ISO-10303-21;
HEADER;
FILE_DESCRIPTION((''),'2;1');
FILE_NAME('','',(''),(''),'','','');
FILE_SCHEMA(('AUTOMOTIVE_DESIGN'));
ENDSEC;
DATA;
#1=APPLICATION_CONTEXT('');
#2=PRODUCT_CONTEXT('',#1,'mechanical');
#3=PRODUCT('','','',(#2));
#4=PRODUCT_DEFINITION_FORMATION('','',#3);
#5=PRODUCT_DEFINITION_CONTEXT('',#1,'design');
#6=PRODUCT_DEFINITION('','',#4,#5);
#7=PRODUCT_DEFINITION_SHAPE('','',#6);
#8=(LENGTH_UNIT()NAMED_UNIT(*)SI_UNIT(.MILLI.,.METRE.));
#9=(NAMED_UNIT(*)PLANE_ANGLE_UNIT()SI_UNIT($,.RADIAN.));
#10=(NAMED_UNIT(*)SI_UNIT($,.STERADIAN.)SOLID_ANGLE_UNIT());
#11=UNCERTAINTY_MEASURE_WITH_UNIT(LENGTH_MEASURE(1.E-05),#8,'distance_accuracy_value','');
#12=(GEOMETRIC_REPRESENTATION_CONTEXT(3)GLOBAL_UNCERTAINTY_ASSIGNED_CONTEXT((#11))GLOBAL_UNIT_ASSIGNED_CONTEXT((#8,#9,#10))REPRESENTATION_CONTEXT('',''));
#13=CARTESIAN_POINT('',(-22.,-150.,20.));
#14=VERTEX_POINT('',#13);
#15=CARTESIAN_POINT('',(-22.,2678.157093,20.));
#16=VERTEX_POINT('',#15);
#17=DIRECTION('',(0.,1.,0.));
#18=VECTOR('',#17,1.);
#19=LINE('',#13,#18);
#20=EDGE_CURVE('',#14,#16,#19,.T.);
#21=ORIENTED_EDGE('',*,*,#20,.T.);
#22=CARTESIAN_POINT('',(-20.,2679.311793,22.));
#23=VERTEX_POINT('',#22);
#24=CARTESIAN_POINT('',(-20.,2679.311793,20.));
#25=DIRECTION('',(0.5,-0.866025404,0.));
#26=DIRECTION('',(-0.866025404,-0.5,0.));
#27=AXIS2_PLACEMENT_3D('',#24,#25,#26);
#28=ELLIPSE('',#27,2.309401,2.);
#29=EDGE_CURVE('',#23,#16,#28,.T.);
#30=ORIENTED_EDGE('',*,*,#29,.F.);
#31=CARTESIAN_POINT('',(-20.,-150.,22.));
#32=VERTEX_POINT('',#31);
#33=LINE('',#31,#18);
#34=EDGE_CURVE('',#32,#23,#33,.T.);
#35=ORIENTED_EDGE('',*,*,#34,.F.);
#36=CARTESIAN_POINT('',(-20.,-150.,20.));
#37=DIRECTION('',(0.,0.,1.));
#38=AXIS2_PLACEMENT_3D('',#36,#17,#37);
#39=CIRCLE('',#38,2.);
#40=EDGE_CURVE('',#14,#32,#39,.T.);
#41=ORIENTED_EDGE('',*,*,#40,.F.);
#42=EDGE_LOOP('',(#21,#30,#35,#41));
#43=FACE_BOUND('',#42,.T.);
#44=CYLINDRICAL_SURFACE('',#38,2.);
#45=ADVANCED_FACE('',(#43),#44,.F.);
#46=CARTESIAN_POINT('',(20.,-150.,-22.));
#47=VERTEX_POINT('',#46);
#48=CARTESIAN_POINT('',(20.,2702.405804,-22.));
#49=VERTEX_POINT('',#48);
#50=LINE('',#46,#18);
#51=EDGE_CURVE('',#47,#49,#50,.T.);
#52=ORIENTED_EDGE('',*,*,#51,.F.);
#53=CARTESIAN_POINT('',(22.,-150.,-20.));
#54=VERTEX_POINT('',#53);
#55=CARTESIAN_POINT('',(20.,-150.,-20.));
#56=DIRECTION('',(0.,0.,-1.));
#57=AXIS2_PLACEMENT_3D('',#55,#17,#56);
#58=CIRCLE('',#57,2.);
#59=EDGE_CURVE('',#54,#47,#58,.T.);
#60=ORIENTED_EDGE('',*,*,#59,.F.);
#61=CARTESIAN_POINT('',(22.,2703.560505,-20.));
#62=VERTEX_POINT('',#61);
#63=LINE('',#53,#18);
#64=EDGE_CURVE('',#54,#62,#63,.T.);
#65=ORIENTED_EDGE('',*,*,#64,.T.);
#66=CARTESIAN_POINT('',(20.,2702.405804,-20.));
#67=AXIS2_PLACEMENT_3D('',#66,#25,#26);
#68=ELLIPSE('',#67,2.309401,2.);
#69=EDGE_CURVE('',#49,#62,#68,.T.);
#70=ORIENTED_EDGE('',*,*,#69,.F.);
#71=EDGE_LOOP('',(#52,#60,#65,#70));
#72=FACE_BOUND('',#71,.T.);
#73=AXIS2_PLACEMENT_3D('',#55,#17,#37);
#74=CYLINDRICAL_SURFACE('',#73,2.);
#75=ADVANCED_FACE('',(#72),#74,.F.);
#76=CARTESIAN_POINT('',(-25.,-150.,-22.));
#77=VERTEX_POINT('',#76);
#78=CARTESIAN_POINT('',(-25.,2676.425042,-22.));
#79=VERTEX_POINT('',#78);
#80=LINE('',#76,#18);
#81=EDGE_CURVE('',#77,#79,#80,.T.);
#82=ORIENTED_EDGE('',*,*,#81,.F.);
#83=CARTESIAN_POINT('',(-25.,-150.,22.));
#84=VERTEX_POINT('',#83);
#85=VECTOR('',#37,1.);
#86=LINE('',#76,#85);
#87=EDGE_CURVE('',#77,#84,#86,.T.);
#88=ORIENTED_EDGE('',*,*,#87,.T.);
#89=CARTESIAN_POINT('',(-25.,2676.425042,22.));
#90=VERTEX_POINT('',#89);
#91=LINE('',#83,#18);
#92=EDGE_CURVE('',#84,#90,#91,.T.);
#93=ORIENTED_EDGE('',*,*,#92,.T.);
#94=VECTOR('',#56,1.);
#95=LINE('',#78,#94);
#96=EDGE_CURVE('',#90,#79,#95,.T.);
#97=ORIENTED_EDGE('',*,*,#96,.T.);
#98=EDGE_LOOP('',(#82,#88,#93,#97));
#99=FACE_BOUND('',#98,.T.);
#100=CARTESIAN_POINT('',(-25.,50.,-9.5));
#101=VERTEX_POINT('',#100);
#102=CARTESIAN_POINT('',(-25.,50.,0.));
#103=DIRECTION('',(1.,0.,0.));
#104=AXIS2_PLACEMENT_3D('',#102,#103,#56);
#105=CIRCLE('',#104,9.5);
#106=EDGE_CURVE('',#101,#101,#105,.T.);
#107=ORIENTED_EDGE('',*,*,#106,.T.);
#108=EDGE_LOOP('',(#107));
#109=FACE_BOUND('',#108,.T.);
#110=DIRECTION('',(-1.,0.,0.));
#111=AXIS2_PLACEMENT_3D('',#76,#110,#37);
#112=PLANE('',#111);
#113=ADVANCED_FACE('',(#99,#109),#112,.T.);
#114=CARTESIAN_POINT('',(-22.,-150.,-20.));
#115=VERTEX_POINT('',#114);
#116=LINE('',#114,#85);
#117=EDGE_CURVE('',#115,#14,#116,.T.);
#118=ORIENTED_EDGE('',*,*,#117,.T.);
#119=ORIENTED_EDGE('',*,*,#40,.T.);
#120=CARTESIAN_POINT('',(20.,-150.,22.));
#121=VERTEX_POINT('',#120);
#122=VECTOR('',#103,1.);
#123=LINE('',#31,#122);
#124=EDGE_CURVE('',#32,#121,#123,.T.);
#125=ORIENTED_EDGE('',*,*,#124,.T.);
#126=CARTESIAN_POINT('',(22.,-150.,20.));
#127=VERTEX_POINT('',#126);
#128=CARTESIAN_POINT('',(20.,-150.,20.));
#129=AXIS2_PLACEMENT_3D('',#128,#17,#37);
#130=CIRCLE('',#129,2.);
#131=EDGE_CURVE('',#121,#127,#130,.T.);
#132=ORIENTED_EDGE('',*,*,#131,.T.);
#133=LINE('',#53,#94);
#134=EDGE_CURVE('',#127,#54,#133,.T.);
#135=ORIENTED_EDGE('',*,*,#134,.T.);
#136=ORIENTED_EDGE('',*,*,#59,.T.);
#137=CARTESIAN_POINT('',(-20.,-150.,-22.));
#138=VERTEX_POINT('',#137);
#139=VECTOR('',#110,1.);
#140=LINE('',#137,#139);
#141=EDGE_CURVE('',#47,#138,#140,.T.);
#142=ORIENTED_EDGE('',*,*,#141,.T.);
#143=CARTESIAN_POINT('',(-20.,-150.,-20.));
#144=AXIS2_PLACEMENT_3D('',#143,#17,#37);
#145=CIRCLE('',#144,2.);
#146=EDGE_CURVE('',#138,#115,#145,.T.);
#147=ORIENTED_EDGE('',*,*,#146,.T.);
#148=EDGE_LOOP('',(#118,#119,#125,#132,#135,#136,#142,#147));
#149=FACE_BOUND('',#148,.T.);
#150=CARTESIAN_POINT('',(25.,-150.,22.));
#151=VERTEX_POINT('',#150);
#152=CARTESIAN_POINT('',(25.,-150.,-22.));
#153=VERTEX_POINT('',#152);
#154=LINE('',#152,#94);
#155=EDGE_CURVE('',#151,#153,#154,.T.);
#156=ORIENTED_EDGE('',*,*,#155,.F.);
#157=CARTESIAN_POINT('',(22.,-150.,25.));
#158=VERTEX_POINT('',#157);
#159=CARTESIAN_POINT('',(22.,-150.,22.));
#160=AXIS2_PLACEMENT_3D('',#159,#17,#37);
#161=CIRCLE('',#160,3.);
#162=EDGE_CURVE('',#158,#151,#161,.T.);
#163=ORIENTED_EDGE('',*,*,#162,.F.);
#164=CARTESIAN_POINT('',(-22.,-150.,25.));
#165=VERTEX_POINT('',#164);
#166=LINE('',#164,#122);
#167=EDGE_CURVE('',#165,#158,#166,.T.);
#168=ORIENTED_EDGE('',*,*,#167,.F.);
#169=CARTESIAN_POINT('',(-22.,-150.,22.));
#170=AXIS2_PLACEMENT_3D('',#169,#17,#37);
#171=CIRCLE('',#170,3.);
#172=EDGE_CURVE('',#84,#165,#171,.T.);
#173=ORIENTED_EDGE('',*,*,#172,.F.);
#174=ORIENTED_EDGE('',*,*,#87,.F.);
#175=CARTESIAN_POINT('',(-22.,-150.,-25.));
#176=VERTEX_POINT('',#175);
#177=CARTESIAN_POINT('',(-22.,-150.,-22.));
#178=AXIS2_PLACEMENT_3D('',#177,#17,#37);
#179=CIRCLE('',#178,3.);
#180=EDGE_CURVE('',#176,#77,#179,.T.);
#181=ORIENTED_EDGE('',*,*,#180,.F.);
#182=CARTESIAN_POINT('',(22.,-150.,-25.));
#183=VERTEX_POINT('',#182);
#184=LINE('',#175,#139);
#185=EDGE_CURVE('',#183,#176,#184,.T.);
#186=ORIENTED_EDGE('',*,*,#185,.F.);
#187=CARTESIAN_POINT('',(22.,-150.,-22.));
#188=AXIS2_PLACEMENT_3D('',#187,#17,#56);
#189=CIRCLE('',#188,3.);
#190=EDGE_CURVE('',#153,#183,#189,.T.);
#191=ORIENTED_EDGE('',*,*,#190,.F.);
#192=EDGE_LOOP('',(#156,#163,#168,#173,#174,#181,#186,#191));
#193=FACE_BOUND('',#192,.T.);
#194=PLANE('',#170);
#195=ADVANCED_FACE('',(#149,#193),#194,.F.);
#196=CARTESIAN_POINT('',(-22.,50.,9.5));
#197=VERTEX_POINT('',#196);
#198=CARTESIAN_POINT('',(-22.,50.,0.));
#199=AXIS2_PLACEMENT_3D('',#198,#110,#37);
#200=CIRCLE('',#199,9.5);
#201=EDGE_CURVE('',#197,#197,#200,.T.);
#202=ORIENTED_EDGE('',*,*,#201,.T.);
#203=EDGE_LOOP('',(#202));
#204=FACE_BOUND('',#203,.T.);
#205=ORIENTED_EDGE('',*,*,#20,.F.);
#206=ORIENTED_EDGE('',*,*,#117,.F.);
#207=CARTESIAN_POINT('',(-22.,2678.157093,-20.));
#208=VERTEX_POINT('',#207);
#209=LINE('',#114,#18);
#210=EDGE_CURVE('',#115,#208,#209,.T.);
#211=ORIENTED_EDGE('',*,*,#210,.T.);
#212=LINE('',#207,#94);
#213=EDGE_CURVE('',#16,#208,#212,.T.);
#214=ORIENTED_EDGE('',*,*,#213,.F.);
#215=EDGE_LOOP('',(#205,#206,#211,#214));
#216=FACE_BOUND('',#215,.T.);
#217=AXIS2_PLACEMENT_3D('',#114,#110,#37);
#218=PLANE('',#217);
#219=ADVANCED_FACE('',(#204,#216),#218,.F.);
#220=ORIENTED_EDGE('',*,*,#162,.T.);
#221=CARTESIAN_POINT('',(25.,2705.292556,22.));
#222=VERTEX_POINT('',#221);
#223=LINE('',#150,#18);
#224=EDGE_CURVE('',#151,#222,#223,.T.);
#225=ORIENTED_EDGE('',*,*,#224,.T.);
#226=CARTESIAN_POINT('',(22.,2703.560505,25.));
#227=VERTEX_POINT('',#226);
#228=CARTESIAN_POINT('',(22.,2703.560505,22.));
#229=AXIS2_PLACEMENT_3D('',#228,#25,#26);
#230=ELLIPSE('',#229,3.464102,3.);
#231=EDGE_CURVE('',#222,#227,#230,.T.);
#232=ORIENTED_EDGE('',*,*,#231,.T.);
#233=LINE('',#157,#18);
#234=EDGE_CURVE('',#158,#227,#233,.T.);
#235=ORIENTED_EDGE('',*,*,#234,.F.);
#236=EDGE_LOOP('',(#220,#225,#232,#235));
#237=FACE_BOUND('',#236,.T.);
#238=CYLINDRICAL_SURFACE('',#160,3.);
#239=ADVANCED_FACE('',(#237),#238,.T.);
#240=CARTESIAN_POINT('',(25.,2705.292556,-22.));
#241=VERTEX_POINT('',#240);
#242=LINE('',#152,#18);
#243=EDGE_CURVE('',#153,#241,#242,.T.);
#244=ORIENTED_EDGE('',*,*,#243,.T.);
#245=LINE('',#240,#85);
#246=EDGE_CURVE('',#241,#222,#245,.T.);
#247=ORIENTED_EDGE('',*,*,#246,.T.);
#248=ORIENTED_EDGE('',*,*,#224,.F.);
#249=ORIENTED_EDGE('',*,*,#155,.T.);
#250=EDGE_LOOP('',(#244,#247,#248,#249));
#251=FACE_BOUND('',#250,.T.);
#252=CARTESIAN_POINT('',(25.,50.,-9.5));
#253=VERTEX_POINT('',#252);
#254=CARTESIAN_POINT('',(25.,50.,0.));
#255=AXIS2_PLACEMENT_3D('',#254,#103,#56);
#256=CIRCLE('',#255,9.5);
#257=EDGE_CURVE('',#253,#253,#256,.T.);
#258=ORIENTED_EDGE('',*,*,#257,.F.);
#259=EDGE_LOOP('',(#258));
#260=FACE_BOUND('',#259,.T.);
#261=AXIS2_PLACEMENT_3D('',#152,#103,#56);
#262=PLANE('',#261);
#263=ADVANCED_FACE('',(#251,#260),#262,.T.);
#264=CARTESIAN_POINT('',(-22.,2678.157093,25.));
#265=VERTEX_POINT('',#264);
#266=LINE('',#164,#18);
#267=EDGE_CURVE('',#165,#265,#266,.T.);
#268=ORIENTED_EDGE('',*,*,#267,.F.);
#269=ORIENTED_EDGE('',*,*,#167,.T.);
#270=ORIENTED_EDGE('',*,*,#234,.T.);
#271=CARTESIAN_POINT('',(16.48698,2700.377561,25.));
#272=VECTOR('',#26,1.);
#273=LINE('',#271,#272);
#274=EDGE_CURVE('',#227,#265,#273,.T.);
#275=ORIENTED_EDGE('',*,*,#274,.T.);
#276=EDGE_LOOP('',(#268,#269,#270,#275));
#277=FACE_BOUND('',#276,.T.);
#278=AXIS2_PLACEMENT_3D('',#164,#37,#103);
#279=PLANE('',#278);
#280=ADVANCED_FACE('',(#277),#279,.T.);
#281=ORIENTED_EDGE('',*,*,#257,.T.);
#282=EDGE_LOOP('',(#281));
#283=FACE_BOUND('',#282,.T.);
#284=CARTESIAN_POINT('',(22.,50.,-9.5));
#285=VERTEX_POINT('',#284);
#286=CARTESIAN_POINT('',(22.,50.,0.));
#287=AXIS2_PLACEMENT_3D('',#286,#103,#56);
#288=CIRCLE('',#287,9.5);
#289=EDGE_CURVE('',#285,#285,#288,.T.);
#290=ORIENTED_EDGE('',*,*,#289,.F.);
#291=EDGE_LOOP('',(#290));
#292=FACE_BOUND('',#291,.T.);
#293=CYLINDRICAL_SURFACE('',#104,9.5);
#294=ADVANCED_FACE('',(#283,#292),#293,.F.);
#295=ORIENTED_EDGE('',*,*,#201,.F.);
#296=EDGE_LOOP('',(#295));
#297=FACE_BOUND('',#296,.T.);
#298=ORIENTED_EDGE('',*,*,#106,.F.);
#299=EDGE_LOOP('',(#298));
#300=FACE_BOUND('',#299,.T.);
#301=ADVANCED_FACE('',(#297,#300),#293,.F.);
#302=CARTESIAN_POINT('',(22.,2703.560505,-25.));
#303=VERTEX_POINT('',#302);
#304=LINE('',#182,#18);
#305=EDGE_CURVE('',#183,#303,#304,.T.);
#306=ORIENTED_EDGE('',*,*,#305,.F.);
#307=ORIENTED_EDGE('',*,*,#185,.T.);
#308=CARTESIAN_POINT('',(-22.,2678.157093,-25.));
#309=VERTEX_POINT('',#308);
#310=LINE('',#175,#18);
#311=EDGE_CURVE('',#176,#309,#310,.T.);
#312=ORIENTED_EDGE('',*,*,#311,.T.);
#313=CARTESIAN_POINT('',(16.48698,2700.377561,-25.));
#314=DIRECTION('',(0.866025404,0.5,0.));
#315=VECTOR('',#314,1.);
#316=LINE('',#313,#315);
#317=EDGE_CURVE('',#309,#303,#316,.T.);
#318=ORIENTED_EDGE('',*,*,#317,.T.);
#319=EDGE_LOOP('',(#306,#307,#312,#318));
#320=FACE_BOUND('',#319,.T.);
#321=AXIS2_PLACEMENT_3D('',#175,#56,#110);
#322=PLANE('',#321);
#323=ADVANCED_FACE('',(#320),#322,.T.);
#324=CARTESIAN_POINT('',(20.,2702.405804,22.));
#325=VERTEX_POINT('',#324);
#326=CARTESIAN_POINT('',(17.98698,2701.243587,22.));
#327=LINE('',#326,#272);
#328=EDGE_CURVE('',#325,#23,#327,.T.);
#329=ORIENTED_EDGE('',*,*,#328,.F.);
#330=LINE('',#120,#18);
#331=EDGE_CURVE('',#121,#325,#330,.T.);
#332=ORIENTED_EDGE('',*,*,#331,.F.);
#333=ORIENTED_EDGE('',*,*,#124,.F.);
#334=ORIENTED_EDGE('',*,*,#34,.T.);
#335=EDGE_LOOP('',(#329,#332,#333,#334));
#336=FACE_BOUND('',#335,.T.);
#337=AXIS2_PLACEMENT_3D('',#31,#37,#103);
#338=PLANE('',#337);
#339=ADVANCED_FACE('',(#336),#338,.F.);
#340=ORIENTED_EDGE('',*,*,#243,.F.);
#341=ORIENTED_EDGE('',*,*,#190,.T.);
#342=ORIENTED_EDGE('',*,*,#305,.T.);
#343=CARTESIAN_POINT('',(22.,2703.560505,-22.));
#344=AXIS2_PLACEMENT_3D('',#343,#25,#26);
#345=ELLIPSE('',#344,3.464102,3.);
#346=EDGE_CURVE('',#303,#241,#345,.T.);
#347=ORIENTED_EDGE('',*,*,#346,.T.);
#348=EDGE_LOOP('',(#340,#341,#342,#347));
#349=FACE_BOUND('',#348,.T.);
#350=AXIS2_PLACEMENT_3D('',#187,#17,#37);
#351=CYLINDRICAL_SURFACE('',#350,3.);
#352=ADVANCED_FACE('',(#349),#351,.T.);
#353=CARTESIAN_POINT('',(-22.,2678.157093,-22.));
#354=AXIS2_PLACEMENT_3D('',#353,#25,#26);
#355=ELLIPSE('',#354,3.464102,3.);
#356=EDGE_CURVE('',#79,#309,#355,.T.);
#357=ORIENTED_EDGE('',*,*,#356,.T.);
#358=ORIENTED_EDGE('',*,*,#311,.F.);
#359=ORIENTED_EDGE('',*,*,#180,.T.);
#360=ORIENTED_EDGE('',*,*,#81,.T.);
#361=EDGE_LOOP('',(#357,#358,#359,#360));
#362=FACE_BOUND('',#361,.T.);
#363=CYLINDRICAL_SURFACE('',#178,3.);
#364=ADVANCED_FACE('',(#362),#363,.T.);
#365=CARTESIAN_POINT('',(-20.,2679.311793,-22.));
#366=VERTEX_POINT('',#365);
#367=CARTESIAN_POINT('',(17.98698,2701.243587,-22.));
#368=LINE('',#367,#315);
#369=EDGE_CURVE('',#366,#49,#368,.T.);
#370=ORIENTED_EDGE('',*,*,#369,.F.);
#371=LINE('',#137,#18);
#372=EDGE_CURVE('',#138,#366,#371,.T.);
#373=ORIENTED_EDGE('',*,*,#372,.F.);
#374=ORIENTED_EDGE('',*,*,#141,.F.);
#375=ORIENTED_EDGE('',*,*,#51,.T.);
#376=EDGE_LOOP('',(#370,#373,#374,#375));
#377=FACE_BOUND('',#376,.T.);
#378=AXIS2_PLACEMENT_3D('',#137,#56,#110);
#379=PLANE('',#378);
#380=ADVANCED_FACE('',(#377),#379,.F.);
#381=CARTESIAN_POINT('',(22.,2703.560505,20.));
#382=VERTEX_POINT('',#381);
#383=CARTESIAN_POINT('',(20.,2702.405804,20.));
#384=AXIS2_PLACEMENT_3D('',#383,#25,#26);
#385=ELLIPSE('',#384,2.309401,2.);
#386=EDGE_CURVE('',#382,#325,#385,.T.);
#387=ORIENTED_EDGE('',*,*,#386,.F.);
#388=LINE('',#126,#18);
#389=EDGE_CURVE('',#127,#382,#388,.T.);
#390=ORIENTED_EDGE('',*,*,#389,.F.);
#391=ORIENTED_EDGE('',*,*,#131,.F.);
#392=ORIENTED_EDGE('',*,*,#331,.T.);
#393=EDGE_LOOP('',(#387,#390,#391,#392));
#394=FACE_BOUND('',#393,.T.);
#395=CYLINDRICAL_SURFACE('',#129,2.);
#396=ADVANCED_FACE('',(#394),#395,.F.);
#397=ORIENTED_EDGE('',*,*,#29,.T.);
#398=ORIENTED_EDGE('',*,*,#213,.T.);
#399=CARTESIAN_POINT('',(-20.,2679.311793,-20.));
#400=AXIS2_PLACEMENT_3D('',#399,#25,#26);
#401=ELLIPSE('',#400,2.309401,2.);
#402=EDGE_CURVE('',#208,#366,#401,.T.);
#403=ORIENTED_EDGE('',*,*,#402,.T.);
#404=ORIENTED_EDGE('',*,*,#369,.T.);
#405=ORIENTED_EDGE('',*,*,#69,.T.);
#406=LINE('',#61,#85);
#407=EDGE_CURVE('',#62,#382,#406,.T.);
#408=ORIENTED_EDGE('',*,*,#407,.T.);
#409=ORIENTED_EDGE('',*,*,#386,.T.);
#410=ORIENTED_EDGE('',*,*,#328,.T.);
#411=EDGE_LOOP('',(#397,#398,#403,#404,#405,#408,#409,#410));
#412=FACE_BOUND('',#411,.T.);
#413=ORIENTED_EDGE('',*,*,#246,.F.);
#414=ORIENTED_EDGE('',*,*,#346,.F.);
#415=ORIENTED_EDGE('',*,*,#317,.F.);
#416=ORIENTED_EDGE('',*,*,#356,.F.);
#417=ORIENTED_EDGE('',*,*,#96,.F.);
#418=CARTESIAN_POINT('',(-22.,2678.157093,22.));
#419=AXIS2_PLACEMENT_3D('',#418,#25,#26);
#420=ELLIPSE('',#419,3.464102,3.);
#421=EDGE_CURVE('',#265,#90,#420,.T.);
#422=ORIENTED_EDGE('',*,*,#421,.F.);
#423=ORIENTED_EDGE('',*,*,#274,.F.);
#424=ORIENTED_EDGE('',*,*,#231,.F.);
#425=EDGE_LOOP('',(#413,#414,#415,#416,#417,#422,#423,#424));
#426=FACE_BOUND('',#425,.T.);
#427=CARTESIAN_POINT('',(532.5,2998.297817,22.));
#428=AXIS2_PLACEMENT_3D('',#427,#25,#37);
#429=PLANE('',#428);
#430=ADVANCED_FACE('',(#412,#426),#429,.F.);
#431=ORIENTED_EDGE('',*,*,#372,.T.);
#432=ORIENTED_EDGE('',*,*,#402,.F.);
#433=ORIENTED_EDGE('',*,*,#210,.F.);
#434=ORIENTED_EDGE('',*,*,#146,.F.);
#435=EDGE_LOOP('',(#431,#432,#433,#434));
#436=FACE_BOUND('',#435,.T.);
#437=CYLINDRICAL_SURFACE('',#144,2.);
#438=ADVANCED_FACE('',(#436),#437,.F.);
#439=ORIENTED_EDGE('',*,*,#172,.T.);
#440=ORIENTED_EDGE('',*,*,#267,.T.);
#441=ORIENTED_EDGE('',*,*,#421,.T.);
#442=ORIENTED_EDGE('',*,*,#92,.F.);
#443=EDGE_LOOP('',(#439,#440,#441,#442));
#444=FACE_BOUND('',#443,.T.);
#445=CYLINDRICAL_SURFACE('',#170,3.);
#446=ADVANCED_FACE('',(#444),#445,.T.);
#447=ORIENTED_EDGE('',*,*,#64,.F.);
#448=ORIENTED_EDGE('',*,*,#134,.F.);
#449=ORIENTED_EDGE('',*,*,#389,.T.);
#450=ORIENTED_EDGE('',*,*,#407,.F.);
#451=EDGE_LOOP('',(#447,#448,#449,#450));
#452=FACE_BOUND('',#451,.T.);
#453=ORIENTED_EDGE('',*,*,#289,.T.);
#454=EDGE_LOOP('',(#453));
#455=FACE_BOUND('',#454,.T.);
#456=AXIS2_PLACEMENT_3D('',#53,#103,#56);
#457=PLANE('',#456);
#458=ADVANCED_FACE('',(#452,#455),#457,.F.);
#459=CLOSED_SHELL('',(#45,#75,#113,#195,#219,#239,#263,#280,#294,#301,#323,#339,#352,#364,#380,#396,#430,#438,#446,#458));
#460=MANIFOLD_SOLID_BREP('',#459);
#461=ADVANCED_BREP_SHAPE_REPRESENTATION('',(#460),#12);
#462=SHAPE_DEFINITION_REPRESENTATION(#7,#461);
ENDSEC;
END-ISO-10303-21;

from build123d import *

# Parameters (mm, degrees)
EXTRUDE_START         = -150
EXTRUDE_1_DEPTH       = 2855.29255553
EXTRUDE_START_2       = -2356
EXTRUDE_1_2_OUTLINE_W = 61
EXTRUDE_1_2_OUTLINE_H = 53
EXTRUDE_1_2_DEPTH     = 25.647922242
SKETCH_2_R            = 9.5
CUT_EXTRUDE_1_DEPTH   = 2706.870065433


with BuildPart() as part:
    # Бобышка-Вытянуть1: read off the stored shape, not the designer's step
    # Бобышка-Вытянуть1 outline → Бобышка-Вытянуть1 (new body)
    with BuildSketch(Plane(origin=(0, 0, 0), x_dir=(1, 0, 0), z_dir=(0, 1, 0)).offset(EXTRUDE_START)):
        with BuildLine():
            Line((-25, 22), (-25, -22))
            ThreePointArc((-25, -22), (-24.121320344, -24.121320344), (-22, -25))
            Line((-22, -25), (22, -25))
            ThreePointArc((22, -25), (24.121320344, -24.121320344), (25, -22))
            Line((25, -22), (25, 22))
            ThreePointArc((25, 22), (24.121320344, 24.121320344), (22, 25))
            Line((22, 25), (-22, 25))
            ThreePointArc((-22, 25), (-24.121320344, 24.121320344), (-25, 22))
        make_face()
        with BuildLine():
            ThreePointArc((-20, -22), (-21.414213562, -21.414213562), (-22, -20))
            Line((-22, -20), (-22, 20))
            ThreePointArc((-22, 20), (-21.414213562, 21.414213562), (-20, 22))
            Line((-20, 22), (20, 22))
            ThreePointArc((20, 22), (21.414213562, 21.414213562), (22, 20))
            Line((22, 20), (22, -20))
            ThreePointArc((22, -20), (21.414213562, -21.414213562), (20, -22))
            Line((20, -22), (-20, -22))
        make_face(mode=Mode.SUBTRACT)
    extrude(amount=EXTRUDE_1_DEPTH)

    # Extrude 1 2 outline → Extrude 1 2 (cut)
    with BuildSketch(Plane(origin=(0, 0, 0), x_dir=(0.8660254037844386, 0.4999999999999999, 0), z_dir=(0.4999999999999999, -0.8660254037844388, 0)).offset(EXTRUDE_START_2)):
        with Locations((1345.5, -0.5)):
            Rectangle(EXTRUDE_1_2_OUTLINE_W, EXTRUDE_1_2_OUTLINE_H)
    extrude(amount=EXTRUDE_1_2_DEPTH, mode=Mode.SUBTRACT)

    # Эскиз2 → Вырез-Вытянуть1 (cut, through all)
    with BuildSketch(Plane(origin=(25, 0, 0), x_dir=(0, 0, -1), z_dir=(1, 0, 0))):
        with Locations((0, 50)):
            Circle(SKETCH_2_R)
    extrude(amount=-CUT_EXTRUDE_1_DEPTH, mode=Mode.SUBTRACT)


solid = part.part
